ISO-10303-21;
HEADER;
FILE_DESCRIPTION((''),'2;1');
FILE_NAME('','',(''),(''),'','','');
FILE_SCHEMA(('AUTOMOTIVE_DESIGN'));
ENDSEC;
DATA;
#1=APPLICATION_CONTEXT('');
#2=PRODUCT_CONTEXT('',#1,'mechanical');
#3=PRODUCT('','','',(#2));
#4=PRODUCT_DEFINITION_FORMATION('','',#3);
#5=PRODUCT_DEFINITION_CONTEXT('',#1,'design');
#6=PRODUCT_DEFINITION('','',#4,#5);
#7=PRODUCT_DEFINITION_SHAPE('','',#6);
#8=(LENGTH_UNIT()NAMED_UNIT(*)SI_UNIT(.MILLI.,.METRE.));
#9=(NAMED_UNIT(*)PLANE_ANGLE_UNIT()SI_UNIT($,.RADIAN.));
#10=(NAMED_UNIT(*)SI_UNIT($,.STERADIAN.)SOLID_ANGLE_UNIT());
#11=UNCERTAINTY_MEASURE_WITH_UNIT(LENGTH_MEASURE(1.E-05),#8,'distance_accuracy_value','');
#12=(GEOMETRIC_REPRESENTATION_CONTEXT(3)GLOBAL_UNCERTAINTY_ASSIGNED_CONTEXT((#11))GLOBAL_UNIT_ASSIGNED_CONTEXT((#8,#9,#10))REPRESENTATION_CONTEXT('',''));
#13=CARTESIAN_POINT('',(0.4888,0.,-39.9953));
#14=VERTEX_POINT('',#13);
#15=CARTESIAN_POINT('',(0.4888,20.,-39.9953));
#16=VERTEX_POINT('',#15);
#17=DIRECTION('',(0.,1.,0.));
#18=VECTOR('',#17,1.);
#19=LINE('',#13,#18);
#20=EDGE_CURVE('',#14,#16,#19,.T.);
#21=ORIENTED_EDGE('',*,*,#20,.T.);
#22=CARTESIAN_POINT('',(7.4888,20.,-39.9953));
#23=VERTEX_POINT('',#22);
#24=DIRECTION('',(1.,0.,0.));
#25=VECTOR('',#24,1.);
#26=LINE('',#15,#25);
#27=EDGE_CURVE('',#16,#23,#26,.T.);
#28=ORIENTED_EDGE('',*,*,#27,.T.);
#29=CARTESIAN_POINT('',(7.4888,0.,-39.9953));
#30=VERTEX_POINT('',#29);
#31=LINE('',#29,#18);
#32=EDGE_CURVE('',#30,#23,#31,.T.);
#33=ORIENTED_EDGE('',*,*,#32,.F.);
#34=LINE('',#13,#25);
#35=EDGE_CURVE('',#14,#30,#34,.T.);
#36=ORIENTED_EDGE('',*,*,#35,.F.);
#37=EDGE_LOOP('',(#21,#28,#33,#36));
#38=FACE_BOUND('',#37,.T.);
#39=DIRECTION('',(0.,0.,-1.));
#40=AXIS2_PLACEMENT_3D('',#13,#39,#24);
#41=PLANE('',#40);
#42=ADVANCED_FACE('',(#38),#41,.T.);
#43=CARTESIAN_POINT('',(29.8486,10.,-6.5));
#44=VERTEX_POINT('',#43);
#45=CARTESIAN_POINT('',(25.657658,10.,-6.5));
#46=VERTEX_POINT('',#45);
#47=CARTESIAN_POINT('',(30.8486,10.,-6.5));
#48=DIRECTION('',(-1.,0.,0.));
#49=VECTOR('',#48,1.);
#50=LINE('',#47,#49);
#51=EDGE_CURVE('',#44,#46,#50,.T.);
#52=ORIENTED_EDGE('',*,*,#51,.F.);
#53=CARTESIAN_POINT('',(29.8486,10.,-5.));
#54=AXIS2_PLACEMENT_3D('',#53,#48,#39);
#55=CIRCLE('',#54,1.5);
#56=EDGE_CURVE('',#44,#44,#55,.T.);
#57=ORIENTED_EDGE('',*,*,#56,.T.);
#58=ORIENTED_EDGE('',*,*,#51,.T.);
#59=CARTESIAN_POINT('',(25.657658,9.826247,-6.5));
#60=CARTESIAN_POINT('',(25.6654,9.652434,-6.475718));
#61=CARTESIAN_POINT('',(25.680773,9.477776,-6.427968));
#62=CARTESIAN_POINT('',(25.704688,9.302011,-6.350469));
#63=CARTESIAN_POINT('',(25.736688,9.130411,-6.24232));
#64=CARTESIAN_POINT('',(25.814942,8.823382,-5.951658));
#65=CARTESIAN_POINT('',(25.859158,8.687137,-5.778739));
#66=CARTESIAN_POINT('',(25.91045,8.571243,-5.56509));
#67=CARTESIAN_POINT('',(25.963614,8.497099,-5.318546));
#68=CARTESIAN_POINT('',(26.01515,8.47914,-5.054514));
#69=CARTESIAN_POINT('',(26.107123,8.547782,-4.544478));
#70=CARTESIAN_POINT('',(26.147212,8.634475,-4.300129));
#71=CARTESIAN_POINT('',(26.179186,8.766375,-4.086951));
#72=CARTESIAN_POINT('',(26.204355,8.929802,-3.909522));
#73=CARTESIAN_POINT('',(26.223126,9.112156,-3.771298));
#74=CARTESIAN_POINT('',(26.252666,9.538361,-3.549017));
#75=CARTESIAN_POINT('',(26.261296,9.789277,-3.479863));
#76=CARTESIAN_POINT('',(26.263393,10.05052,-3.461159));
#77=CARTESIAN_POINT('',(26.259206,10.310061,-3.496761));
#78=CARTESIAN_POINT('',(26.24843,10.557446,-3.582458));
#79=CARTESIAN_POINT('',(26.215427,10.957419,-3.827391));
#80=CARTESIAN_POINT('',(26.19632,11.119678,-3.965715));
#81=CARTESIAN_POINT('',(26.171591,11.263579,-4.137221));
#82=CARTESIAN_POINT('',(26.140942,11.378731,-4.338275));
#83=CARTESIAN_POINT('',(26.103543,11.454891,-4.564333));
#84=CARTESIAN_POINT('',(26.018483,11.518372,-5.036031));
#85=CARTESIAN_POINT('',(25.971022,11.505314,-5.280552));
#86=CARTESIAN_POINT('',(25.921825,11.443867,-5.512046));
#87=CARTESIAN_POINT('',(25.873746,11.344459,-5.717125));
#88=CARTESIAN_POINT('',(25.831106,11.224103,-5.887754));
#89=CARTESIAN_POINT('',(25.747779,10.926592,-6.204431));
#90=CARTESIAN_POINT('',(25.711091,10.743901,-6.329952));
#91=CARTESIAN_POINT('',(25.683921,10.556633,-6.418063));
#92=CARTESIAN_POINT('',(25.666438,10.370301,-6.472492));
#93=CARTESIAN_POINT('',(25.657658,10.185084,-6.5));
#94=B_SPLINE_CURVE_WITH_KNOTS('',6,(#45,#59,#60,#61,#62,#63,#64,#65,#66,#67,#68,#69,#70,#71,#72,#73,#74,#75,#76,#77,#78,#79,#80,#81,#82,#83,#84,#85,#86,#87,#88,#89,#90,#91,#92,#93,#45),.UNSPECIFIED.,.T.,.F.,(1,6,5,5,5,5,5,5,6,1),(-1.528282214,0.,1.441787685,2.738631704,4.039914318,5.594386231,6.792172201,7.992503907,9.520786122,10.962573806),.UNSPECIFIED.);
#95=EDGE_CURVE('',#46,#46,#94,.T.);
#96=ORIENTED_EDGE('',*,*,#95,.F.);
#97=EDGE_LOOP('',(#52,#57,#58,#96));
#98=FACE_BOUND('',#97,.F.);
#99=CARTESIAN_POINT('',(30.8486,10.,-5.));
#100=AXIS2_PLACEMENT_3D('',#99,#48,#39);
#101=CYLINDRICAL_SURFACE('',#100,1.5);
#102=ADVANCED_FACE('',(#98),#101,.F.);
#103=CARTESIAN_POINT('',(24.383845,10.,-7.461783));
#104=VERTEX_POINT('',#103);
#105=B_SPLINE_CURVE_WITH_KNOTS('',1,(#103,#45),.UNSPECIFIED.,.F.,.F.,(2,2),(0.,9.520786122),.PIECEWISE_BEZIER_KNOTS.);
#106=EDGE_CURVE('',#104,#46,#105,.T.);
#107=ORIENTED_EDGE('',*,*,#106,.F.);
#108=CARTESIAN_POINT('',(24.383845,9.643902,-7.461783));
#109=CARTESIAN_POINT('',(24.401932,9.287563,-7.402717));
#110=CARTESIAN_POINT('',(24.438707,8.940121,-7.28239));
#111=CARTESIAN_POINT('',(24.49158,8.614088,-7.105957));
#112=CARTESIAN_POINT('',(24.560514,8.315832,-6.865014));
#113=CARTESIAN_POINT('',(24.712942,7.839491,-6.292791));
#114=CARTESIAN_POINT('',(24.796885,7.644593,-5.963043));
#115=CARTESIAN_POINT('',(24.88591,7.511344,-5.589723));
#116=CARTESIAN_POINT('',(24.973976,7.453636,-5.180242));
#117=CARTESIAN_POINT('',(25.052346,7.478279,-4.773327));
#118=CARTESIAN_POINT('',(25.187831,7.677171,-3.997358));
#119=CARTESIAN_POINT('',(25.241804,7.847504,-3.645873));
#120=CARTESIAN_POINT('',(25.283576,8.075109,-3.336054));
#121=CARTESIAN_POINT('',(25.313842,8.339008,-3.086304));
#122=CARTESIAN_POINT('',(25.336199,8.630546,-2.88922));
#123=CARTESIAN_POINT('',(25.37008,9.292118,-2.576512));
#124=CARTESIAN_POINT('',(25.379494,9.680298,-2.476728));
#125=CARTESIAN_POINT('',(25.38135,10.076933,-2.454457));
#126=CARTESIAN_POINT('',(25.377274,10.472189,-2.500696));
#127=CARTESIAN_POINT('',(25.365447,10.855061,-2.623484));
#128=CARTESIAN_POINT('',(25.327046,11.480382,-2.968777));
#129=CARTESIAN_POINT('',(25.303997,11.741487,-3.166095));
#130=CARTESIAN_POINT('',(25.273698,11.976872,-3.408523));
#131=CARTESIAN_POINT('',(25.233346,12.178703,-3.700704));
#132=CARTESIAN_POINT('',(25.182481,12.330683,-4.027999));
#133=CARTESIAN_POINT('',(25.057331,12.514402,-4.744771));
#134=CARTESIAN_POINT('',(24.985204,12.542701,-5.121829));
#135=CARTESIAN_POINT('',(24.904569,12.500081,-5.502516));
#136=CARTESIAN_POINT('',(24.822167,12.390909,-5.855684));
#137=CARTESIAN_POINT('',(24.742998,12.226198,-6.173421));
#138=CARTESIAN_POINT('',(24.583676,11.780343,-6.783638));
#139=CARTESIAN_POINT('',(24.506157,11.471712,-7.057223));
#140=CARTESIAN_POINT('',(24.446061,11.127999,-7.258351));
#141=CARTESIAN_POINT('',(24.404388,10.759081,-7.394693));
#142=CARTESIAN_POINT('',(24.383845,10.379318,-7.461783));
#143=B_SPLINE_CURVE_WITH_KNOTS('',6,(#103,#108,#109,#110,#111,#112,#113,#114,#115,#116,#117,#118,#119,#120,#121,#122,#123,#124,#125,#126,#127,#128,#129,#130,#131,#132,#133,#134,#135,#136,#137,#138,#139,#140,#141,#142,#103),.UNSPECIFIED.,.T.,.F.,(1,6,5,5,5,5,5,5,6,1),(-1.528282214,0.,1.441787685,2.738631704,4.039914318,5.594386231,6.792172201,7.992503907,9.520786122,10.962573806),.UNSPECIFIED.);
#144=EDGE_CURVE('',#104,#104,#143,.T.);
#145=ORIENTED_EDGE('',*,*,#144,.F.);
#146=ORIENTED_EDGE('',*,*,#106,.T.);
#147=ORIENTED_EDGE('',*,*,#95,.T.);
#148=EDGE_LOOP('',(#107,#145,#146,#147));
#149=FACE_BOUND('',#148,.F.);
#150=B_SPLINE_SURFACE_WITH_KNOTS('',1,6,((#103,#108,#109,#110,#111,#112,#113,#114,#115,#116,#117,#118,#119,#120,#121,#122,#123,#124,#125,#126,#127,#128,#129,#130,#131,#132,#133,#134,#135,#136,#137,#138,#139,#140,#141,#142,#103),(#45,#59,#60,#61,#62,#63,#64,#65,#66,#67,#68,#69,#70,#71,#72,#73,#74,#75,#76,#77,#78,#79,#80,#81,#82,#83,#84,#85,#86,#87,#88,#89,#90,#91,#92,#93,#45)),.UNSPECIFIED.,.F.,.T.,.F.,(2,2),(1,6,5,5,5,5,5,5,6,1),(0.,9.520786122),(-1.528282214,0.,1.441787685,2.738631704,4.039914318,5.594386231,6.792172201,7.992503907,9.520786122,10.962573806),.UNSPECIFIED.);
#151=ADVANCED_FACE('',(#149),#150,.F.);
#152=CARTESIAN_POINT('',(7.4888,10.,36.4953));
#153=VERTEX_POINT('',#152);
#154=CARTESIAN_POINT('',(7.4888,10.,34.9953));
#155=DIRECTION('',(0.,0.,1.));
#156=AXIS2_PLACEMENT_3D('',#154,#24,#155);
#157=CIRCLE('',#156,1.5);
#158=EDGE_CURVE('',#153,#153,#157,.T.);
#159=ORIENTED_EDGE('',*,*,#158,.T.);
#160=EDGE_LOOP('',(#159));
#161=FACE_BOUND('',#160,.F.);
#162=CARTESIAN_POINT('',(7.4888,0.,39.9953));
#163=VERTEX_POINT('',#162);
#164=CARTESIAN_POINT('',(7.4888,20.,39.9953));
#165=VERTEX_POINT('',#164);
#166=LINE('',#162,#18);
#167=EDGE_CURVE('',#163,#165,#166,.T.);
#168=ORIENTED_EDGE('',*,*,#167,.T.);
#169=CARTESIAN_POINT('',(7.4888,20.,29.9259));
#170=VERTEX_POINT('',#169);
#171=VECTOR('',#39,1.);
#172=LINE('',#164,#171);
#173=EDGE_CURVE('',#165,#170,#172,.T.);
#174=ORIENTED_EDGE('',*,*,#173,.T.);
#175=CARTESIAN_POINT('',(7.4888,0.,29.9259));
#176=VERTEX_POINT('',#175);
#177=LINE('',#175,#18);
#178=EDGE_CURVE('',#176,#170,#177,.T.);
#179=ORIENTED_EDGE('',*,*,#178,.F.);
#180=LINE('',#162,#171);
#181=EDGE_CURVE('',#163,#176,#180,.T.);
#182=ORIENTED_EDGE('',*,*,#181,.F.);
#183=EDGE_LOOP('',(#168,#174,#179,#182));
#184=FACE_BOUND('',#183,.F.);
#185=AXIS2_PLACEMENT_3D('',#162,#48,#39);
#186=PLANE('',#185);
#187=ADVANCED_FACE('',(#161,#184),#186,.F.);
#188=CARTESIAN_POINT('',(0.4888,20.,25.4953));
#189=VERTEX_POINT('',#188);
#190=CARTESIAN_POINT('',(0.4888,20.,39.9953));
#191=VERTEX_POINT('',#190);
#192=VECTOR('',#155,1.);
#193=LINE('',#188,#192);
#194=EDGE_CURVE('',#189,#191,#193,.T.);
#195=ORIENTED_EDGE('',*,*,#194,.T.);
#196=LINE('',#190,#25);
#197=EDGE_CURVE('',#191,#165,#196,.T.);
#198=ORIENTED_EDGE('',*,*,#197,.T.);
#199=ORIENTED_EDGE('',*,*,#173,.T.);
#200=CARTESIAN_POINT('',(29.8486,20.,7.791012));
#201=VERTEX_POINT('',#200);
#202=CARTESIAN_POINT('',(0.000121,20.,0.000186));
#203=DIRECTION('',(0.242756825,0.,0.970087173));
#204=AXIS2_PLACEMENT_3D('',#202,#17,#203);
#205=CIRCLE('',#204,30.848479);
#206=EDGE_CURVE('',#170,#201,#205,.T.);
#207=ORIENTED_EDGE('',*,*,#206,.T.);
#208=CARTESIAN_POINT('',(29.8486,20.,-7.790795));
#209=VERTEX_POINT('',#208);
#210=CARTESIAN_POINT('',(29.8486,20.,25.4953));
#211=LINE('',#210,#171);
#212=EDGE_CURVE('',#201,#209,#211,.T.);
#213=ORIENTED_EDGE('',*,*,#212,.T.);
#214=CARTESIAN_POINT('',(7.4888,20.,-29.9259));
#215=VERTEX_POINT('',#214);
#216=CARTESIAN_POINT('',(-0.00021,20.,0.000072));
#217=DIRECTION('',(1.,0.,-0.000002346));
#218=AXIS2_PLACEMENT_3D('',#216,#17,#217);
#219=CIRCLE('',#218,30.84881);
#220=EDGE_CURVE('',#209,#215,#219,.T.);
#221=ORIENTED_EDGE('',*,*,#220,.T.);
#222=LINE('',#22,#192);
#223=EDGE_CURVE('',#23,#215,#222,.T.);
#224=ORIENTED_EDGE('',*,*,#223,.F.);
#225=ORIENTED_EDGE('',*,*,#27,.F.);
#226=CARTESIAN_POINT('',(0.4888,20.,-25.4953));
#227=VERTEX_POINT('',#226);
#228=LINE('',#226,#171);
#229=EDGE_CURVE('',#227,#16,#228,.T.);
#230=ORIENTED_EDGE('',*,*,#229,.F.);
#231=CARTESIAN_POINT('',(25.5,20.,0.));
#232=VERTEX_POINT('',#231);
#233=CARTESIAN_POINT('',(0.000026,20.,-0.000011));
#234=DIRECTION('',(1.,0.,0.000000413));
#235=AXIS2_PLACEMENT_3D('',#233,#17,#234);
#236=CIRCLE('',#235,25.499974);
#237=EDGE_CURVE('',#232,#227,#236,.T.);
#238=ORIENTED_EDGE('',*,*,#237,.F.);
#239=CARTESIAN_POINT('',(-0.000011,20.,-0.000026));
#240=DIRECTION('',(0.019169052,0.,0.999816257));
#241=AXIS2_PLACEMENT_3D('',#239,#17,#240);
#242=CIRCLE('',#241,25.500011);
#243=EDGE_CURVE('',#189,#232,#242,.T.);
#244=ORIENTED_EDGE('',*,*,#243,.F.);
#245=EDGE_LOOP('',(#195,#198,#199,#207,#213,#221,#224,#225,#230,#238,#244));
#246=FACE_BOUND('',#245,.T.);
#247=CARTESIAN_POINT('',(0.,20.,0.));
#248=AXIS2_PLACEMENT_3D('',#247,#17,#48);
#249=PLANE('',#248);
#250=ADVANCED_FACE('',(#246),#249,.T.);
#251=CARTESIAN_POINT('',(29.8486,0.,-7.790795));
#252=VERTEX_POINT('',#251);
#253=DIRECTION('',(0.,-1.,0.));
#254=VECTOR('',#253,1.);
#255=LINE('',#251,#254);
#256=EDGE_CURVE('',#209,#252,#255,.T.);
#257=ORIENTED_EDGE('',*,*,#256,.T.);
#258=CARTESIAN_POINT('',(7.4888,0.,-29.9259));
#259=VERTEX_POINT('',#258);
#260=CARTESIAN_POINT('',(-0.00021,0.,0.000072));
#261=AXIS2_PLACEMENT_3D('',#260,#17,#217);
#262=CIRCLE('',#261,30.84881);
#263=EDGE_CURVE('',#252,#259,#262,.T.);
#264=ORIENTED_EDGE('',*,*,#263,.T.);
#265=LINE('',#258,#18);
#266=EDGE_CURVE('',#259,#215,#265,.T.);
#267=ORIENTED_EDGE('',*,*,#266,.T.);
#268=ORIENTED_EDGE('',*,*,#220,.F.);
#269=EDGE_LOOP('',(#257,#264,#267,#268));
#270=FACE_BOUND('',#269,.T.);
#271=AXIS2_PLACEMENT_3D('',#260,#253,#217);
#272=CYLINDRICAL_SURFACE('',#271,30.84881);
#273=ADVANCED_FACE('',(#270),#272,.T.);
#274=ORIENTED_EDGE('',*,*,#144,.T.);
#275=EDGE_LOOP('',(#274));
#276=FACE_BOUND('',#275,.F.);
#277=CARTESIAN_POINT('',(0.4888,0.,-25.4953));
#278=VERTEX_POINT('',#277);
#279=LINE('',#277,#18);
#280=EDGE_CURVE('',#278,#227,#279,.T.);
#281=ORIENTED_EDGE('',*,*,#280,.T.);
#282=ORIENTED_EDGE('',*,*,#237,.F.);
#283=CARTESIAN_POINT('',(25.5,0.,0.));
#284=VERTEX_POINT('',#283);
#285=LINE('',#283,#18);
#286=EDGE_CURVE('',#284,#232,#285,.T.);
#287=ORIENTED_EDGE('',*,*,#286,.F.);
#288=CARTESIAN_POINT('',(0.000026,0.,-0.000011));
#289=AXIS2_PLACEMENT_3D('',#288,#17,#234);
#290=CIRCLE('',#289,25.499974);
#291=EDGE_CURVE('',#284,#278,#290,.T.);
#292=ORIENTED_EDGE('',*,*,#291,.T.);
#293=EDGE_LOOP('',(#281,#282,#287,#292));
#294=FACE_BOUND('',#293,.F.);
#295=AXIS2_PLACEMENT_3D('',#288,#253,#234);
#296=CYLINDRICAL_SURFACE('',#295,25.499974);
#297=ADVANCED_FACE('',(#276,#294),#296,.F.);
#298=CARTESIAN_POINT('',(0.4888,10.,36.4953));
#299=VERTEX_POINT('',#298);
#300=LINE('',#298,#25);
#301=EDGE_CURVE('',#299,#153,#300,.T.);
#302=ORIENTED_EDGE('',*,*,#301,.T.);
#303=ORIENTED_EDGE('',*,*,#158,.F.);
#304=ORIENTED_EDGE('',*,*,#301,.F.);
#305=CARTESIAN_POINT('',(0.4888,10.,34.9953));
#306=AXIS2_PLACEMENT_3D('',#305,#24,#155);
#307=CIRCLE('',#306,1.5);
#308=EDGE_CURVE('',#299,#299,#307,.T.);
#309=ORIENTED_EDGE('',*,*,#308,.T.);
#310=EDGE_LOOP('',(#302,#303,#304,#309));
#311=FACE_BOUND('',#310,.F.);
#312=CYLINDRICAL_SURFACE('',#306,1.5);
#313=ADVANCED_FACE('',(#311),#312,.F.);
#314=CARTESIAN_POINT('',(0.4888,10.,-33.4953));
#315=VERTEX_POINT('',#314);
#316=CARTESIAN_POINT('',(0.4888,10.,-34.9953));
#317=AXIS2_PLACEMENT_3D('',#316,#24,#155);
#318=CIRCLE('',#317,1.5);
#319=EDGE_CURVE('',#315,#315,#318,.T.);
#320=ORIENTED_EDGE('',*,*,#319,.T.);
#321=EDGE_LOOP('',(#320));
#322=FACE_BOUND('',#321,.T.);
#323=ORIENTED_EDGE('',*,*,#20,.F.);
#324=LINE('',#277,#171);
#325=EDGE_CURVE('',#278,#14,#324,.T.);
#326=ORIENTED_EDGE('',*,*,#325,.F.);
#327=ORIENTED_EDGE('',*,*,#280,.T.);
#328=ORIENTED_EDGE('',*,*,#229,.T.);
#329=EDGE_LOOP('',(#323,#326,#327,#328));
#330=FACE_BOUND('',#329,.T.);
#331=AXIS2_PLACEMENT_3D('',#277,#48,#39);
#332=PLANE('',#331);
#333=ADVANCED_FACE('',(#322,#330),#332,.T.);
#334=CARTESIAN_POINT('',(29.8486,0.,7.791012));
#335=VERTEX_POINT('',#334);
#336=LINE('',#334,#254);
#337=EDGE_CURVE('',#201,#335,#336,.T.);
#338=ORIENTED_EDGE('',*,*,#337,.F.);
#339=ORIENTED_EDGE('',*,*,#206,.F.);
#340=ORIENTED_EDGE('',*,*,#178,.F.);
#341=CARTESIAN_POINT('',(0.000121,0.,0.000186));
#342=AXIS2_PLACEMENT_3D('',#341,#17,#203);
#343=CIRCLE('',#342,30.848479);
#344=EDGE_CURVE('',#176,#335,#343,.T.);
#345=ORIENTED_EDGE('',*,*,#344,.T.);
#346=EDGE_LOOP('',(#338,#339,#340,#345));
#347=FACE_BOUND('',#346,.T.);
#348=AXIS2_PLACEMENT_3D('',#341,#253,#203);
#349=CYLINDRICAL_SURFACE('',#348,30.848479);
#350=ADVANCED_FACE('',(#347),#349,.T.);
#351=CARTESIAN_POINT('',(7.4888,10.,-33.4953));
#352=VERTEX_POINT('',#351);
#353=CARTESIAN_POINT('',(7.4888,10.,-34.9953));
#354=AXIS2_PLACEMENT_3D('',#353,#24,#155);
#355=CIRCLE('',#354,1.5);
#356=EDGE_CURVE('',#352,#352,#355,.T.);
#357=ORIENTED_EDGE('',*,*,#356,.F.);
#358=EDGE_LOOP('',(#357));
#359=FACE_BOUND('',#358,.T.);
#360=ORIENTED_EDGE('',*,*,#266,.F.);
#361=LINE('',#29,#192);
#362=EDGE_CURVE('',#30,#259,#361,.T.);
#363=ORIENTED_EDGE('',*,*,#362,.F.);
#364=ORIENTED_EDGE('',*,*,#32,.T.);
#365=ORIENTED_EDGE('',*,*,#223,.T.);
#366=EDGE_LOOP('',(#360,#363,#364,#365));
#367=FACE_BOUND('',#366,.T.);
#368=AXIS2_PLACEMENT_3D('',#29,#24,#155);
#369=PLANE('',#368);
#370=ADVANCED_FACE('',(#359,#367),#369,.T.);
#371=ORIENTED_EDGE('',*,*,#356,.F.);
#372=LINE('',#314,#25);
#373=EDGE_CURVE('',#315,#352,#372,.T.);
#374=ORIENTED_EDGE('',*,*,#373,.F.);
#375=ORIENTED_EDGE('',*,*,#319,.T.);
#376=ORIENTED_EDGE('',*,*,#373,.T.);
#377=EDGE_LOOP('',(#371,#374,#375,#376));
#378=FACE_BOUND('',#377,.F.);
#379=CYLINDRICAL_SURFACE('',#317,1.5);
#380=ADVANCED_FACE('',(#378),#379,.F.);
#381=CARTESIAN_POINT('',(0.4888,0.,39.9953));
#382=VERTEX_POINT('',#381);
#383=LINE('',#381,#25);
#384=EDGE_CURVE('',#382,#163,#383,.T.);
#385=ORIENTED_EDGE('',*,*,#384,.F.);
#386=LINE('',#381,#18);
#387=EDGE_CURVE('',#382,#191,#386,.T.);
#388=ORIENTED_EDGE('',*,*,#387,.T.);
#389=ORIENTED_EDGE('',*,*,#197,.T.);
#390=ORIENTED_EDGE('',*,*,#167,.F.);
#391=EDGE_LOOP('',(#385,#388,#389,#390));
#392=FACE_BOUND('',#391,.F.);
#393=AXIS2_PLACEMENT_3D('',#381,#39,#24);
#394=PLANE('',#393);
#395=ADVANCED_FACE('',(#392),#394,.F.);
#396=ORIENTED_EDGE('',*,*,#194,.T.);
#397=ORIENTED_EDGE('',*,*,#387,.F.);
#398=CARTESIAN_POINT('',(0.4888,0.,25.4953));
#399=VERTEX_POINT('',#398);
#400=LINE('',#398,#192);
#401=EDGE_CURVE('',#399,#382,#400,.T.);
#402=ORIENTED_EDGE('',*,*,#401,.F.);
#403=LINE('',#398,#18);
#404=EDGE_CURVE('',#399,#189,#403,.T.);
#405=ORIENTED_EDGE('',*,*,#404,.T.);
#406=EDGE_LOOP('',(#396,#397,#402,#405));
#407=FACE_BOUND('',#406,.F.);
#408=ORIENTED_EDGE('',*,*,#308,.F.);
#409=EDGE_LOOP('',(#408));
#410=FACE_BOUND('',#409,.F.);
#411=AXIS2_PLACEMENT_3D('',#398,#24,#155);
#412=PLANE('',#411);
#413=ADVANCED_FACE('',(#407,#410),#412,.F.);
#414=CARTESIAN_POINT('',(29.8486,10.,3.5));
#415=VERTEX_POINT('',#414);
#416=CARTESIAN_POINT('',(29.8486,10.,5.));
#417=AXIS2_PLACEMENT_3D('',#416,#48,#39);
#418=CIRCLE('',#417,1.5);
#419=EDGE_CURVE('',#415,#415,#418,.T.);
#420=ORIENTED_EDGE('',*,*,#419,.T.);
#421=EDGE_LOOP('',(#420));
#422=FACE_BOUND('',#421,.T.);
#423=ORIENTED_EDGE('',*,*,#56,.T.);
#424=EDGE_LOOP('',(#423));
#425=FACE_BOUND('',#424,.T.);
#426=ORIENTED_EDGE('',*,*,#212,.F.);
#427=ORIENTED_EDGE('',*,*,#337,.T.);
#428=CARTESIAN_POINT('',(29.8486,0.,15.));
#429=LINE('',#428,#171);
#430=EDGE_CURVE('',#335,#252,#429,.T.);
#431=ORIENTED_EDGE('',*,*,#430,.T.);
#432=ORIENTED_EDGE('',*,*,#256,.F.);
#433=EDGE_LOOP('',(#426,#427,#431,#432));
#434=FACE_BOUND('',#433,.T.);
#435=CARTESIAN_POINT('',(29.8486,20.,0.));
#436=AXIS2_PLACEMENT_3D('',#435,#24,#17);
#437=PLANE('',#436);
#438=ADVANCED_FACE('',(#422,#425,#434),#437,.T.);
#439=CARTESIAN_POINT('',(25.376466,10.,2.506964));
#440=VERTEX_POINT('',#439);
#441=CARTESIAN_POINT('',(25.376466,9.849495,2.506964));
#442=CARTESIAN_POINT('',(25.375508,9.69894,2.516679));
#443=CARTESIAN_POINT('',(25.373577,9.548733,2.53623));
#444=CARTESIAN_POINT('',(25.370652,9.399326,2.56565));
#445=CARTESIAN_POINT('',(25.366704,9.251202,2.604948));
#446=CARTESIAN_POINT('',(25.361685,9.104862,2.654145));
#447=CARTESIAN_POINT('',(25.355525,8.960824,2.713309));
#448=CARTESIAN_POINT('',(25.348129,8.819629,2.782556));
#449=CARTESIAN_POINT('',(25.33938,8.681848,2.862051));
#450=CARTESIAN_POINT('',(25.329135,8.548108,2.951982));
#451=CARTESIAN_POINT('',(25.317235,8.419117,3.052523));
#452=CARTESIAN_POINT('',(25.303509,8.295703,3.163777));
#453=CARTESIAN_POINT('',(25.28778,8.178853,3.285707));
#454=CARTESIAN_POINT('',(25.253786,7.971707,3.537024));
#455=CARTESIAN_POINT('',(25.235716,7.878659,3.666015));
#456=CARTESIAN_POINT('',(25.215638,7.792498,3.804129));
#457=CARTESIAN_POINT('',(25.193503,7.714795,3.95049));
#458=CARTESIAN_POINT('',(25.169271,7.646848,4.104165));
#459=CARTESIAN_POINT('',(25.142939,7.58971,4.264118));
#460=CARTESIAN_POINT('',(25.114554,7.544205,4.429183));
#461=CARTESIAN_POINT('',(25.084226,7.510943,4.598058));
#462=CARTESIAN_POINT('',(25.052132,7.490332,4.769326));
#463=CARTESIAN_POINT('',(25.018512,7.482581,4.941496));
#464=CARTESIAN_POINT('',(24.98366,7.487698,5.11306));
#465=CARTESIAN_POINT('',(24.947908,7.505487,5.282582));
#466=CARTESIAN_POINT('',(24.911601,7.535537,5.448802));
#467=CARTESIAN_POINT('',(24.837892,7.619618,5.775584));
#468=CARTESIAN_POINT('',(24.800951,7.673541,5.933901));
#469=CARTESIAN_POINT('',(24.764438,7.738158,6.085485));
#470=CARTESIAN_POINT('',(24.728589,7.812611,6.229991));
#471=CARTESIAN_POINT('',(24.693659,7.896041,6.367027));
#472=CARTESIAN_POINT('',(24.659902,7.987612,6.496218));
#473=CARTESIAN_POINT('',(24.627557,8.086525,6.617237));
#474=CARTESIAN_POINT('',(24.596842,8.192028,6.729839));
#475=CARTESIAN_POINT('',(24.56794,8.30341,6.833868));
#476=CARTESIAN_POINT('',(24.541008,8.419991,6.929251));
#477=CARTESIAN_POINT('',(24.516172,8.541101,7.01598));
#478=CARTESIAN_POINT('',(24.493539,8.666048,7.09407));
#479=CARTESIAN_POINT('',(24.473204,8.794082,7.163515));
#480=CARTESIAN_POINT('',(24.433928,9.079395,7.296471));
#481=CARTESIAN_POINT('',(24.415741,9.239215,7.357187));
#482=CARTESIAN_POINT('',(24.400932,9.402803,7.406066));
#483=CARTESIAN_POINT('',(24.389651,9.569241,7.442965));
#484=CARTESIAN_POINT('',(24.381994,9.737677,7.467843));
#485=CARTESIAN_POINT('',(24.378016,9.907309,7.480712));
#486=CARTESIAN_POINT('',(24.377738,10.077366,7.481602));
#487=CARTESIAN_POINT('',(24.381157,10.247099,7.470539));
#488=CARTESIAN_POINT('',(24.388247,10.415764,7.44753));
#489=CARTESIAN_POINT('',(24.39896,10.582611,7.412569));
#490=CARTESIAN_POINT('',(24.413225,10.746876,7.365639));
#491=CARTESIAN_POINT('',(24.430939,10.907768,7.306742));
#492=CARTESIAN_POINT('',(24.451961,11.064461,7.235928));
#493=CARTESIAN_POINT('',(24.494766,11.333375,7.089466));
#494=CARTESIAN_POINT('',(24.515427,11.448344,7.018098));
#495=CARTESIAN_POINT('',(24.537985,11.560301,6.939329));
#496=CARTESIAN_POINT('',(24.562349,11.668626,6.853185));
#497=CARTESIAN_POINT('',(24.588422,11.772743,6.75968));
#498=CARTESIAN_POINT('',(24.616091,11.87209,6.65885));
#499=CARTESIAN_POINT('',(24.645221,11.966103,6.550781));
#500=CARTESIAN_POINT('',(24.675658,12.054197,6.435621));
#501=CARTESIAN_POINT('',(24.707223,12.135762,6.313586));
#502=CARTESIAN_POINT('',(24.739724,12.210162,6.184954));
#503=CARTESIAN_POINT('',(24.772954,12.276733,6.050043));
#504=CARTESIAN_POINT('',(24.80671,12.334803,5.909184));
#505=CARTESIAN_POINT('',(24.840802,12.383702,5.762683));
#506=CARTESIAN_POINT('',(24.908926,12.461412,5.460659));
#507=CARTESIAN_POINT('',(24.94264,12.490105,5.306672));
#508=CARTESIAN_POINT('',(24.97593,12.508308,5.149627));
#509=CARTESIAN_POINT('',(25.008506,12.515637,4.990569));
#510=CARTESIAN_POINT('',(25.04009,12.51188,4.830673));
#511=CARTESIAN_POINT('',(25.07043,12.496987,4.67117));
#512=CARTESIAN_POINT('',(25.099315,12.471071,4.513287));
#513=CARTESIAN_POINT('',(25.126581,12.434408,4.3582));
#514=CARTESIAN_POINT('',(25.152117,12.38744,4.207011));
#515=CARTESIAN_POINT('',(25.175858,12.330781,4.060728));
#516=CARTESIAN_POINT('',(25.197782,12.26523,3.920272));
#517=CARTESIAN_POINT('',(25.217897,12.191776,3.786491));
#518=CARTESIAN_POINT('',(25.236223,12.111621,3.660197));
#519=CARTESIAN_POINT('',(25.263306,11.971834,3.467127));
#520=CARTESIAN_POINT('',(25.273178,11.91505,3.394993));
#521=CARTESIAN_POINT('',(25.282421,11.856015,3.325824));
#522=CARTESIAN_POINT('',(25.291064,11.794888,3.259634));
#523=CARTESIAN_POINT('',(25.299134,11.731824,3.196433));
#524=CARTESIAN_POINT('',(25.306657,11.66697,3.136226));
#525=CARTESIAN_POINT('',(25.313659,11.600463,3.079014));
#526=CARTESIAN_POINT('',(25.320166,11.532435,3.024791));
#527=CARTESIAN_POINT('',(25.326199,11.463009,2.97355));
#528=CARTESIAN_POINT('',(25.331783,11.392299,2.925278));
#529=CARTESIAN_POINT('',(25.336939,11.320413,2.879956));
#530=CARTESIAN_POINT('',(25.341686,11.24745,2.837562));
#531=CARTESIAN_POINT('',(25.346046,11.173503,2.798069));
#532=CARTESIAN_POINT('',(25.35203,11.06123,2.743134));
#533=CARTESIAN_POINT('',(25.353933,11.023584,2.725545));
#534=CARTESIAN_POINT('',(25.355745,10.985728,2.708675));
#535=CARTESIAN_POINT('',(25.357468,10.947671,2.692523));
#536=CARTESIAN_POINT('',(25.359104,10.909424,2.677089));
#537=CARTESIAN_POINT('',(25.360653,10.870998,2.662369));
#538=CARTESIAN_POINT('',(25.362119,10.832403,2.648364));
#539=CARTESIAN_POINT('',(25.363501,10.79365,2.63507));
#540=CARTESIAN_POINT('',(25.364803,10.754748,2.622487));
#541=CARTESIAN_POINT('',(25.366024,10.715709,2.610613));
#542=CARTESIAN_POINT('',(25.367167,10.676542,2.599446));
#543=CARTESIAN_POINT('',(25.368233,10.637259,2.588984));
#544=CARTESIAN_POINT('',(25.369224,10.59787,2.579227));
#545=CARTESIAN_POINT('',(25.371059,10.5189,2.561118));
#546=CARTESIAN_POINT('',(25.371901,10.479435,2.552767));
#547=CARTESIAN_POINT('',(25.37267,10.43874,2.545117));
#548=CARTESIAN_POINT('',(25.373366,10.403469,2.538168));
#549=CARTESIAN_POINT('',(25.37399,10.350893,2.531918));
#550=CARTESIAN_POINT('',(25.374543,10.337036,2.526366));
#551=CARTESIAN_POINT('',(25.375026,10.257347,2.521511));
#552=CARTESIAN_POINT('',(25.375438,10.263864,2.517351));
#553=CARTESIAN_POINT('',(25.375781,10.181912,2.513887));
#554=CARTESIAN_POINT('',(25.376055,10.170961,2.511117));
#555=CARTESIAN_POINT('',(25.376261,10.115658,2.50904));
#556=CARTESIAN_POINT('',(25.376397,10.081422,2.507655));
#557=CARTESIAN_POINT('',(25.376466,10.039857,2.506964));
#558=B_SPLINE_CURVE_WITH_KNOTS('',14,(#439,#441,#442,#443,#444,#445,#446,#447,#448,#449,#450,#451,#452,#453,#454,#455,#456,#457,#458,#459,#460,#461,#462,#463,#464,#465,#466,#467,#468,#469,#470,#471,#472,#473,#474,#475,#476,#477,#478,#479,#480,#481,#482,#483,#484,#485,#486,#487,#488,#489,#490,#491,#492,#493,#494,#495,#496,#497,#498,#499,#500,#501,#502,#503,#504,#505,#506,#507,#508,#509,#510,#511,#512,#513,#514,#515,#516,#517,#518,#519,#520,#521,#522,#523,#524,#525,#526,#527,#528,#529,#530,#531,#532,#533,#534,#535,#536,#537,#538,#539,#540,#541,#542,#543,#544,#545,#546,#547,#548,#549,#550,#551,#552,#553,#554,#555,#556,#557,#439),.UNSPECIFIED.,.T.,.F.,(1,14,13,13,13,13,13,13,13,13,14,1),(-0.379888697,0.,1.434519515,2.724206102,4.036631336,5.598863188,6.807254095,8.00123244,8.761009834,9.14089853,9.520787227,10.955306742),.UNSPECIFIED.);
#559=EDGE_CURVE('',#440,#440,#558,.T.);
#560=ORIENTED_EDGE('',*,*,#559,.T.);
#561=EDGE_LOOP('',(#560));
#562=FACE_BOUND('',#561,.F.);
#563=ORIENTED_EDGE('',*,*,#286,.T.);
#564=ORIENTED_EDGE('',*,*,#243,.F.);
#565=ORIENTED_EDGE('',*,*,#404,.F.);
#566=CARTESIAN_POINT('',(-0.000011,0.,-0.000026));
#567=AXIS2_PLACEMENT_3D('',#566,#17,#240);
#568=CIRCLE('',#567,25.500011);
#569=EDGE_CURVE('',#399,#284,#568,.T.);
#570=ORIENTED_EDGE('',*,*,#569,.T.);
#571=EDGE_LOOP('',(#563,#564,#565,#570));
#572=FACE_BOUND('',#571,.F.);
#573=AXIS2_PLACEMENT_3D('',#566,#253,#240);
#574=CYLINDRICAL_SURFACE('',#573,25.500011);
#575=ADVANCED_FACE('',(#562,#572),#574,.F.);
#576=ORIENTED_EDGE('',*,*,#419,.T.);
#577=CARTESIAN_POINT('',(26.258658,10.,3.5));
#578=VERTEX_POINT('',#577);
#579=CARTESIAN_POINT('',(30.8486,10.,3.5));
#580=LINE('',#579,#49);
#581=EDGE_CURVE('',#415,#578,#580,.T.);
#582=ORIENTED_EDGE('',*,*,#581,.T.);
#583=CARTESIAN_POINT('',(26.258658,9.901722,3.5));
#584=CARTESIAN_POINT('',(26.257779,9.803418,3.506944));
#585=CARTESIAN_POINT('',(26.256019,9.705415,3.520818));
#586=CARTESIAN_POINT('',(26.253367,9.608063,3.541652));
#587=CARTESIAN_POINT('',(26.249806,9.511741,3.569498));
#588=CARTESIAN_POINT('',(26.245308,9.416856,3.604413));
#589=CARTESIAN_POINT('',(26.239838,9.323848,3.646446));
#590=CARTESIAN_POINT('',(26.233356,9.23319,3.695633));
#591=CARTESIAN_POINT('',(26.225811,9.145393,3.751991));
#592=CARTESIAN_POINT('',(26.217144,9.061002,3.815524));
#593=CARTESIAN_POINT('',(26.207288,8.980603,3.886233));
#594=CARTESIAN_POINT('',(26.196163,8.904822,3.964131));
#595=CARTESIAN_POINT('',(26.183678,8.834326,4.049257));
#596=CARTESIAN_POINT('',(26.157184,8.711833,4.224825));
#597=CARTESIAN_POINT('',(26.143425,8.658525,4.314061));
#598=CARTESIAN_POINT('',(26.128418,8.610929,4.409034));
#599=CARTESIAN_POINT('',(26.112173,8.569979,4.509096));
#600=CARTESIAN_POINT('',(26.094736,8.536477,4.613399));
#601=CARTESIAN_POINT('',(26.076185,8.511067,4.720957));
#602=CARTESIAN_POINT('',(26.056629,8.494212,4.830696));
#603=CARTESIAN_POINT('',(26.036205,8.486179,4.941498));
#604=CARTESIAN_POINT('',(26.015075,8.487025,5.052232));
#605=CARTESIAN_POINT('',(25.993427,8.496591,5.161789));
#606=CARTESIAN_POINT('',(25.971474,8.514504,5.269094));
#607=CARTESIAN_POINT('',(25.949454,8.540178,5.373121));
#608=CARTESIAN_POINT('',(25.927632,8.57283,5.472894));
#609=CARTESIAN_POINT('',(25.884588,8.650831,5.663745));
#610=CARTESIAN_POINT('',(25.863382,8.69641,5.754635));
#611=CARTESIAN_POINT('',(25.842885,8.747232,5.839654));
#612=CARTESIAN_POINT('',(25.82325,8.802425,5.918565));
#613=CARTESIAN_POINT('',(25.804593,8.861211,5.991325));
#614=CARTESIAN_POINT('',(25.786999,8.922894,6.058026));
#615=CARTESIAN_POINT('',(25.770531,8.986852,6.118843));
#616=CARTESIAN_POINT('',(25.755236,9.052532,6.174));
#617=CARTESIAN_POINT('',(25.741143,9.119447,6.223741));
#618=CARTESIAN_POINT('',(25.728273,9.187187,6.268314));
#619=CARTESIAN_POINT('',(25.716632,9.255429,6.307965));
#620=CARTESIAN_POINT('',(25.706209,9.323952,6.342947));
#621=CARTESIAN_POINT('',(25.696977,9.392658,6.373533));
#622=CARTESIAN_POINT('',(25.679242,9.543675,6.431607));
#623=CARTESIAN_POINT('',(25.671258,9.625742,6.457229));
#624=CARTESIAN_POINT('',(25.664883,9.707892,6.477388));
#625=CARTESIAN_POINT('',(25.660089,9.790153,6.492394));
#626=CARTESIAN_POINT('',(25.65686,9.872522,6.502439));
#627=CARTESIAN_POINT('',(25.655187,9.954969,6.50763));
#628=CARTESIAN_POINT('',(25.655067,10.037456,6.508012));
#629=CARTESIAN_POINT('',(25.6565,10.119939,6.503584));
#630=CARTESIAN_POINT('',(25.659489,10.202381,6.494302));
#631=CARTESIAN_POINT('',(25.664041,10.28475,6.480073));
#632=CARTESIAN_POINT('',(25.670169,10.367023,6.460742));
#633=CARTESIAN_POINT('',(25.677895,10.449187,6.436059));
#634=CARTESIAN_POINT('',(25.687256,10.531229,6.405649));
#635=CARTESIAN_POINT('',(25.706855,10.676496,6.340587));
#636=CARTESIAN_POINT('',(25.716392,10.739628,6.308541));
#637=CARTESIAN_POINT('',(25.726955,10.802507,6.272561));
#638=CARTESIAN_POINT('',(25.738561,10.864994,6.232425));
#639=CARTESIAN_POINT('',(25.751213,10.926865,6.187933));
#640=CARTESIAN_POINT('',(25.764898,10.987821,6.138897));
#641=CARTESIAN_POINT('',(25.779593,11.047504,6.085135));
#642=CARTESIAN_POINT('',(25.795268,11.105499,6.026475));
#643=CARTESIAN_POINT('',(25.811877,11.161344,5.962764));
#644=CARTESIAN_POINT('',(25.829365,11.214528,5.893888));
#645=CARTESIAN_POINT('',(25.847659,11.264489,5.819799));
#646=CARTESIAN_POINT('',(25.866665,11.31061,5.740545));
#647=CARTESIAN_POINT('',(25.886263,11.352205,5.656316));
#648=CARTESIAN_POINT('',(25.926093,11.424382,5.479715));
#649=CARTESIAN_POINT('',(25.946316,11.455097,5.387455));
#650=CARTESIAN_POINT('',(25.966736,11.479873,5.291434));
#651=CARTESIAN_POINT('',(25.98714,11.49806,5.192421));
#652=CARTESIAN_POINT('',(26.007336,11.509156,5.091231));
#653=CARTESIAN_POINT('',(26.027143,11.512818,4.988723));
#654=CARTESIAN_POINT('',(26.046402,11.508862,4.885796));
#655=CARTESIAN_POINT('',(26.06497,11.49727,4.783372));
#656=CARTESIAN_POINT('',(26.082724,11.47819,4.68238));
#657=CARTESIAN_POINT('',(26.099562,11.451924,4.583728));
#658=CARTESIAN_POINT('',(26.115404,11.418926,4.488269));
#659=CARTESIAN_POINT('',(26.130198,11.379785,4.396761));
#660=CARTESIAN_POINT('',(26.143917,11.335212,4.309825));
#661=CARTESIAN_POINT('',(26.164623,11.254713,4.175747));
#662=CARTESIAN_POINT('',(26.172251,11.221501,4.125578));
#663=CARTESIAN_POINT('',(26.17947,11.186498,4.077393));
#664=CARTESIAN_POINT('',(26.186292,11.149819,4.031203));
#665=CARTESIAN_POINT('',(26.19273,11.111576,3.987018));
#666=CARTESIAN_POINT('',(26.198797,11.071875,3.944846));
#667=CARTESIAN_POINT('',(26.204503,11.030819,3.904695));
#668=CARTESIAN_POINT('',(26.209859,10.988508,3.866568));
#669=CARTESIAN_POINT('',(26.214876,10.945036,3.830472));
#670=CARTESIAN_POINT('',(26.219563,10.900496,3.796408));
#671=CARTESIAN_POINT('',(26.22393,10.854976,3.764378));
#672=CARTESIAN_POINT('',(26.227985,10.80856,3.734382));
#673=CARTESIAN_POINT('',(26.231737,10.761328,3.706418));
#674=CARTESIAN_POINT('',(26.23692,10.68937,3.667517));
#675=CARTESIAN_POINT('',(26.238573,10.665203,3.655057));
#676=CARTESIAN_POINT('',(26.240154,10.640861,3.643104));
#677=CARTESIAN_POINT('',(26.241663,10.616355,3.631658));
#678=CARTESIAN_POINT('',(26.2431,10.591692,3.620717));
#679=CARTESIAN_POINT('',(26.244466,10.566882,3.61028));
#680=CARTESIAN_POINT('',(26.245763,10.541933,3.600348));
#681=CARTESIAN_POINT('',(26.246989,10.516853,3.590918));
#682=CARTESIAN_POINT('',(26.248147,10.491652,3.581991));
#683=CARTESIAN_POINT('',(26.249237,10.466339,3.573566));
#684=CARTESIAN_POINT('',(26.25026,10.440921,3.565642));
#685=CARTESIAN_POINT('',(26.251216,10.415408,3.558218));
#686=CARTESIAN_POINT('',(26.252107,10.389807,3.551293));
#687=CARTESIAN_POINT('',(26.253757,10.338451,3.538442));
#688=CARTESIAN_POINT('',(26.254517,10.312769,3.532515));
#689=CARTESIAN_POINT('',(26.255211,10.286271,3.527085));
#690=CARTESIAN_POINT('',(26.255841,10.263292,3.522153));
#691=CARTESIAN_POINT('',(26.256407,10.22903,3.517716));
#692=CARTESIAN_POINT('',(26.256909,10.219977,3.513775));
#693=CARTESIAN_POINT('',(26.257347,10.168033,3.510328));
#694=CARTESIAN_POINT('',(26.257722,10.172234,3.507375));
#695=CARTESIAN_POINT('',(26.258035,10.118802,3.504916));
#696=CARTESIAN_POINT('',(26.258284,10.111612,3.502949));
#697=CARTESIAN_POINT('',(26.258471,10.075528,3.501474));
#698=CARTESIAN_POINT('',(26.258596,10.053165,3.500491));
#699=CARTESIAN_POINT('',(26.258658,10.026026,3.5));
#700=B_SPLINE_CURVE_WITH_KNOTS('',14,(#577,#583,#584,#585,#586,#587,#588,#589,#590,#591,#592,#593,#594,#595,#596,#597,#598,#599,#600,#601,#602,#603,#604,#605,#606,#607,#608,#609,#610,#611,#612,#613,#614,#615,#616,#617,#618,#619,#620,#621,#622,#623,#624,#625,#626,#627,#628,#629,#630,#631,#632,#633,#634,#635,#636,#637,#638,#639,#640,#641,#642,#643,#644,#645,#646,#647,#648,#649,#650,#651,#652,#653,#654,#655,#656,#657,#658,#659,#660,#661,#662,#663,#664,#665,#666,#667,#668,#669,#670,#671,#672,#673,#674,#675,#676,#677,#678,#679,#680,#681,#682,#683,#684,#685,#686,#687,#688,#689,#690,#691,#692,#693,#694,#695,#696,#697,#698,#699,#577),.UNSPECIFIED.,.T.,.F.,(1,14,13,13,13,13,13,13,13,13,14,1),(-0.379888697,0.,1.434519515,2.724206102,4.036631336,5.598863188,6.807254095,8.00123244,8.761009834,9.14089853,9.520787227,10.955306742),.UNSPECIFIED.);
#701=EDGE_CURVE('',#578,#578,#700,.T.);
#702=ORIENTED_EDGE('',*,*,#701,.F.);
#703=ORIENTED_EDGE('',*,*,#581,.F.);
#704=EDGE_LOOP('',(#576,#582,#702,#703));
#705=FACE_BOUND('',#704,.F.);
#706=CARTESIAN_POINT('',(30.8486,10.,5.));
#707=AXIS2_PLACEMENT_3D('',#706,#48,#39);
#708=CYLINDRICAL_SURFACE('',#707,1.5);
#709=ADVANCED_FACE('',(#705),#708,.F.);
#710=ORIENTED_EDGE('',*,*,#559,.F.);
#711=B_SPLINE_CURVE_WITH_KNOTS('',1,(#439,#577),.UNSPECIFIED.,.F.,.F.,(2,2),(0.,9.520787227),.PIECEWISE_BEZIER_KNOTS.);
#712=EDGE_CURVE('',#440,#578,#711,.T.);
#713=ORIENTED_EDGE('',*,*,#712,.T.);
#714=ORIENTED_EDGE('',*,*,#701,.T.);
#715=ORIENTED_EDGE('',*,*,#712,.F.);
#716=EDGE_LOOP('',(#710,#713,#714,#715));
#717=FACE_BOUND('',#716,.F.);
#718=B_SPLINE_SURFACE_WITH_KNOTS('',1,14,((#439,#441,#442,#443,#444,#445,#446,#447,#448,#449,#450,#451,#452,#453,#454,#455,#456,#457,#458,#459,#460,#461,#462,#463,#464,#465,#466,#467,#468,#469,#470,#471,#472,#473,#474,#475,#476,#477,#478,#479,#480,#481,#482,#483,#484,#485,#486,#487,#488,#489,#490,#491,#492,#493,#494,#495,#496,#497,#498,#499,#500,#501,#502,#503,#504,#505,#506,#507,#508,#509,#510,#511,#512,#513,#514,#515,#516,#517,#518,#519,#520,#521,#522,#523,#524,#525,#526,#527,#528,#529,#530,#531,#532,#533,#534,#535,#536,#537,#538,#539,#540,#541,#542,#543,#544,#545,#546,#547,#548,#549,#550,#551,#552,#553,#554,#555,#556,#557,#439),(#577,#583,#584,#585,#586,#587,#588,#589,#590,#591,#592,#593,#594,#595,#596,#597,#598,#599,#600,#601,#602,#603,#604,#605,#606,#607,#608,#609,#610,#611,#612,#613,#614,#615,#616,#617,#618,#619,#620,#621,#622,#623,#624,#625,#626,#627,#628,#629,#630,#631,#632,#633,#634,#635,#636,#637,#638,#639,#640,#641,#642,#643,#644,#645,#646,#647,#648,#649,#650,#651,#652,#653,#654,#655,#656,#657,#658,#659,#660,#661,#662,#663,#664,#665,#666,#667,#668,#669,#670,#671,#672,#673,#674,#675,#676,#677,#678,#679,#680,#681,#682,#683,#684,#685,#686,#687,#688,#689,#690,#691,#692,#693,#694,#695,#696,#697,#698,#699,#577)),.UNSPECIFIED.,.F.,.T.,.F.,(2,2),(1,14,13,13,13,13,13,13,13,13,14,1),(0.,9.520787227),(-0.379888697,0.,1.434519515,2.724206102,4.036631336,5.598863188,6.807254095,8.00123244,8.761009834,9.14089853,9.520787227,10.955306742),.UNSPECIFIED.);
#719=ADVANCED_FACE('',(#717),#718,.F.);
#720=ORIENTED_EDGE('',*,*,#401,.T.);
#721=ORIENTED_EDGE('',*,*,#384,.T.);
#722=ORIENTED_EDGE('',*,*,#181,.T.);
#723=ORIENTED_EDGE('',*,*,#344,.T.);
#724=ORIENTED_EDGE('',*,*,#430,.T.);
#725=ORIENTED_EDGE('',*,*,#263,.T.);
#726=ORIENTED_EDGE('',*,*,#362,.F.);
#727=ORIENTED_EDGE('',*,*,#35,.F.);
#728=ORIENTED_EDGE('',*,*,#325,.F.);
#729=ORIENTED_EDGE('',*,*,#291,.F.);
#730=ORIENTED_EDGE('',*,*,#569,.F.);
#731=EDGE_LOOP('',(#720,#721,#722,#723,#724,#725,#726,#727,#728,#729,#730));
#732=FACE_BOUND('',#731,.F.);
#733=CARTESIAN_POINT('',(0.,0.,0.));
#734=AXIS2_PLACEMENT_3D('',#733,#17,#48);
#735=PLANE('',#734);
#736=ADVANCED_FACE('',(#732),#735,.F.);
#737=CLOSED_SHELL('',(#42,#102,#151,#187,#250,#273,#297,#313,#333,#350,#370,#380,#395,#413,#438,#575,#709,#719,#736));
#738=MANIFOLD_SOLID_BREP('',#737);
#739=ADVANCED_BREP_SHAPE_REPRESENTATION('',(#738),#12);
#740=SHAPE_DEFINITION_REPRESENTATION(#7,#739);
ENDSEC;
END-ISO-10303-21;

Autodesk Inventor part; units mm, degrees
ref_plane "YZ Plane" through (0, 0, 0) normal (1, 0, 0) x (0, 1, 0)
ref_plane "XZ Plane" through (0, 0, 0) normal (0, 1, 0) x (-1, 0, 0)
ref_plane "XY Plane" through (0, 0, 0) normal (0, 0, 1) x (1, 0, 0)
sketch "Skizze1" plane through (0, 0, 0) normal (0, 1, 0) x (-1, 0, 0)
  arc A0 (-0.4888, 25.4953) -> (-25.5, 0) centre (0, 0) ccw
  arc A1 (-7.4888, 29.9259) -> (-30.8486, 0) centre (0, 0) ccw
  line L0 (-0.4888, 25.4953) -> (-0.4888, 39.9953)
  line L1 (-0.4888, 39.9953) -> (-7.4888, 39.9953)
  line L2 (-7.4888, 39.9953) -> (-7.4888, 29.9259)
  line L3 (0, 0) -> (-16.7346, 0) construction
  arc A2 (-25.5, 0) -> (-0.4888, -25.4953) centre (0, 0) ccw
  arc A3 (-30.8486, 0) -> (-7.4888, -29.9259) centre (0, 0) ccw
  line L4 (-0.4888, -25.4953) -> (-0.4888, -39.9953)
  line L5 (-0.4888, -39.9953) -> (-7.4888, -39.9953)
  line L6 (-7.4888, -39.9953) -> (-7.4888, -29.9259)
  dimension "d5" = 14.5
  dimension "d6" = 25.5
  dimension "d8" = 10.0694
  dimension "d9" = 7
  dimension "d52" = 30.8486
extrude "Extrusion1" add sketch "Skizze1" along normal blind 20
sketch "Skizze2" plane through (0.4888, 0, 25.4953) normal (-1, 0, 0) x (0, 0, 1)
  line L0 (14.5, 0) -> (14.5, 20) projected
  line L1 (14.5, 10) -> (-98.2028, 10) construction
  line L2 (0, 20) -> (14.5, 20) projected
  line L3 (-65.4906, 0) -> (-65.4906, 20) projected
  point P0 (-25.4953, 0)
  point P1 (9.5, 10)
  point P2 (-60.4906, 10)
  dimension "d12" = 10
  dimension "d13" = 5
  dimension "d14" = 5
hole "Bohrung1" at (0.4888, 10, 34.9953) at (0.4888, 10, -34.9953) direction (1, 0, 0) diameter 3 end through all
ref_plane "Arbeitsebene1" through (30.8486, 20, 0) normal (1, 0, 0) x (0, 1, 0)
sketch "Skizze3" plane through (30.8486, 20, 0) normal (1, 0, 0) x (0, 1, 0)
  line L0 (0, 25.4953) -> (0, -25.4953) projected
  line L1 (0, 15) -> (-20, 15)
  line L2 (-20, 15) -> (-20, -15)
  line L3 (-20, -15) -> (0, -15)
  line L4 (0, -15) -> (0, 15)
  point P0 (-20, 0)
  dimension "d28" = 20
  dimension "d30" = 15
  dimension "d31" = 15
extrude "Extrusion2" cut sketch "Skizze3" against normal blind 1
sketch "Skizze4" plane through (30.8486, 20, 0) normal (1, 0, 0) x (0, 1, 0)
  line L0 (0, -7.7908) -> (-20, -7.7908) construction
  line L1 (-10, -7.7908) -> (-10, 7.7908) construction
  line L2 (-20, 7.7908) -> (0, 7.7908) construction
  line L3 (-20, 0) -> (0, 0) construction
  line L4 (0, 25.4953) -> (0, -25.4953) construction
  point P0 (-10, -5)
  point P1 (-10, 5)
  dimension "d49" = 5
  dimension "d50" = 5
hole "Bohrung2" at (30.8486, 10, -5) at (30.8486, 10, 5) direction (-1, 0, 0) diameter 3 end through all
chamfer "Fase2" distance 1 angle 45 1 edges at (25.2587, 9.9941, -3.5)
chamfer "Fase3" distance 1 angle 45 1 edges at (24.6577, 9.994, 6.5)
properties part number "spannringe"
